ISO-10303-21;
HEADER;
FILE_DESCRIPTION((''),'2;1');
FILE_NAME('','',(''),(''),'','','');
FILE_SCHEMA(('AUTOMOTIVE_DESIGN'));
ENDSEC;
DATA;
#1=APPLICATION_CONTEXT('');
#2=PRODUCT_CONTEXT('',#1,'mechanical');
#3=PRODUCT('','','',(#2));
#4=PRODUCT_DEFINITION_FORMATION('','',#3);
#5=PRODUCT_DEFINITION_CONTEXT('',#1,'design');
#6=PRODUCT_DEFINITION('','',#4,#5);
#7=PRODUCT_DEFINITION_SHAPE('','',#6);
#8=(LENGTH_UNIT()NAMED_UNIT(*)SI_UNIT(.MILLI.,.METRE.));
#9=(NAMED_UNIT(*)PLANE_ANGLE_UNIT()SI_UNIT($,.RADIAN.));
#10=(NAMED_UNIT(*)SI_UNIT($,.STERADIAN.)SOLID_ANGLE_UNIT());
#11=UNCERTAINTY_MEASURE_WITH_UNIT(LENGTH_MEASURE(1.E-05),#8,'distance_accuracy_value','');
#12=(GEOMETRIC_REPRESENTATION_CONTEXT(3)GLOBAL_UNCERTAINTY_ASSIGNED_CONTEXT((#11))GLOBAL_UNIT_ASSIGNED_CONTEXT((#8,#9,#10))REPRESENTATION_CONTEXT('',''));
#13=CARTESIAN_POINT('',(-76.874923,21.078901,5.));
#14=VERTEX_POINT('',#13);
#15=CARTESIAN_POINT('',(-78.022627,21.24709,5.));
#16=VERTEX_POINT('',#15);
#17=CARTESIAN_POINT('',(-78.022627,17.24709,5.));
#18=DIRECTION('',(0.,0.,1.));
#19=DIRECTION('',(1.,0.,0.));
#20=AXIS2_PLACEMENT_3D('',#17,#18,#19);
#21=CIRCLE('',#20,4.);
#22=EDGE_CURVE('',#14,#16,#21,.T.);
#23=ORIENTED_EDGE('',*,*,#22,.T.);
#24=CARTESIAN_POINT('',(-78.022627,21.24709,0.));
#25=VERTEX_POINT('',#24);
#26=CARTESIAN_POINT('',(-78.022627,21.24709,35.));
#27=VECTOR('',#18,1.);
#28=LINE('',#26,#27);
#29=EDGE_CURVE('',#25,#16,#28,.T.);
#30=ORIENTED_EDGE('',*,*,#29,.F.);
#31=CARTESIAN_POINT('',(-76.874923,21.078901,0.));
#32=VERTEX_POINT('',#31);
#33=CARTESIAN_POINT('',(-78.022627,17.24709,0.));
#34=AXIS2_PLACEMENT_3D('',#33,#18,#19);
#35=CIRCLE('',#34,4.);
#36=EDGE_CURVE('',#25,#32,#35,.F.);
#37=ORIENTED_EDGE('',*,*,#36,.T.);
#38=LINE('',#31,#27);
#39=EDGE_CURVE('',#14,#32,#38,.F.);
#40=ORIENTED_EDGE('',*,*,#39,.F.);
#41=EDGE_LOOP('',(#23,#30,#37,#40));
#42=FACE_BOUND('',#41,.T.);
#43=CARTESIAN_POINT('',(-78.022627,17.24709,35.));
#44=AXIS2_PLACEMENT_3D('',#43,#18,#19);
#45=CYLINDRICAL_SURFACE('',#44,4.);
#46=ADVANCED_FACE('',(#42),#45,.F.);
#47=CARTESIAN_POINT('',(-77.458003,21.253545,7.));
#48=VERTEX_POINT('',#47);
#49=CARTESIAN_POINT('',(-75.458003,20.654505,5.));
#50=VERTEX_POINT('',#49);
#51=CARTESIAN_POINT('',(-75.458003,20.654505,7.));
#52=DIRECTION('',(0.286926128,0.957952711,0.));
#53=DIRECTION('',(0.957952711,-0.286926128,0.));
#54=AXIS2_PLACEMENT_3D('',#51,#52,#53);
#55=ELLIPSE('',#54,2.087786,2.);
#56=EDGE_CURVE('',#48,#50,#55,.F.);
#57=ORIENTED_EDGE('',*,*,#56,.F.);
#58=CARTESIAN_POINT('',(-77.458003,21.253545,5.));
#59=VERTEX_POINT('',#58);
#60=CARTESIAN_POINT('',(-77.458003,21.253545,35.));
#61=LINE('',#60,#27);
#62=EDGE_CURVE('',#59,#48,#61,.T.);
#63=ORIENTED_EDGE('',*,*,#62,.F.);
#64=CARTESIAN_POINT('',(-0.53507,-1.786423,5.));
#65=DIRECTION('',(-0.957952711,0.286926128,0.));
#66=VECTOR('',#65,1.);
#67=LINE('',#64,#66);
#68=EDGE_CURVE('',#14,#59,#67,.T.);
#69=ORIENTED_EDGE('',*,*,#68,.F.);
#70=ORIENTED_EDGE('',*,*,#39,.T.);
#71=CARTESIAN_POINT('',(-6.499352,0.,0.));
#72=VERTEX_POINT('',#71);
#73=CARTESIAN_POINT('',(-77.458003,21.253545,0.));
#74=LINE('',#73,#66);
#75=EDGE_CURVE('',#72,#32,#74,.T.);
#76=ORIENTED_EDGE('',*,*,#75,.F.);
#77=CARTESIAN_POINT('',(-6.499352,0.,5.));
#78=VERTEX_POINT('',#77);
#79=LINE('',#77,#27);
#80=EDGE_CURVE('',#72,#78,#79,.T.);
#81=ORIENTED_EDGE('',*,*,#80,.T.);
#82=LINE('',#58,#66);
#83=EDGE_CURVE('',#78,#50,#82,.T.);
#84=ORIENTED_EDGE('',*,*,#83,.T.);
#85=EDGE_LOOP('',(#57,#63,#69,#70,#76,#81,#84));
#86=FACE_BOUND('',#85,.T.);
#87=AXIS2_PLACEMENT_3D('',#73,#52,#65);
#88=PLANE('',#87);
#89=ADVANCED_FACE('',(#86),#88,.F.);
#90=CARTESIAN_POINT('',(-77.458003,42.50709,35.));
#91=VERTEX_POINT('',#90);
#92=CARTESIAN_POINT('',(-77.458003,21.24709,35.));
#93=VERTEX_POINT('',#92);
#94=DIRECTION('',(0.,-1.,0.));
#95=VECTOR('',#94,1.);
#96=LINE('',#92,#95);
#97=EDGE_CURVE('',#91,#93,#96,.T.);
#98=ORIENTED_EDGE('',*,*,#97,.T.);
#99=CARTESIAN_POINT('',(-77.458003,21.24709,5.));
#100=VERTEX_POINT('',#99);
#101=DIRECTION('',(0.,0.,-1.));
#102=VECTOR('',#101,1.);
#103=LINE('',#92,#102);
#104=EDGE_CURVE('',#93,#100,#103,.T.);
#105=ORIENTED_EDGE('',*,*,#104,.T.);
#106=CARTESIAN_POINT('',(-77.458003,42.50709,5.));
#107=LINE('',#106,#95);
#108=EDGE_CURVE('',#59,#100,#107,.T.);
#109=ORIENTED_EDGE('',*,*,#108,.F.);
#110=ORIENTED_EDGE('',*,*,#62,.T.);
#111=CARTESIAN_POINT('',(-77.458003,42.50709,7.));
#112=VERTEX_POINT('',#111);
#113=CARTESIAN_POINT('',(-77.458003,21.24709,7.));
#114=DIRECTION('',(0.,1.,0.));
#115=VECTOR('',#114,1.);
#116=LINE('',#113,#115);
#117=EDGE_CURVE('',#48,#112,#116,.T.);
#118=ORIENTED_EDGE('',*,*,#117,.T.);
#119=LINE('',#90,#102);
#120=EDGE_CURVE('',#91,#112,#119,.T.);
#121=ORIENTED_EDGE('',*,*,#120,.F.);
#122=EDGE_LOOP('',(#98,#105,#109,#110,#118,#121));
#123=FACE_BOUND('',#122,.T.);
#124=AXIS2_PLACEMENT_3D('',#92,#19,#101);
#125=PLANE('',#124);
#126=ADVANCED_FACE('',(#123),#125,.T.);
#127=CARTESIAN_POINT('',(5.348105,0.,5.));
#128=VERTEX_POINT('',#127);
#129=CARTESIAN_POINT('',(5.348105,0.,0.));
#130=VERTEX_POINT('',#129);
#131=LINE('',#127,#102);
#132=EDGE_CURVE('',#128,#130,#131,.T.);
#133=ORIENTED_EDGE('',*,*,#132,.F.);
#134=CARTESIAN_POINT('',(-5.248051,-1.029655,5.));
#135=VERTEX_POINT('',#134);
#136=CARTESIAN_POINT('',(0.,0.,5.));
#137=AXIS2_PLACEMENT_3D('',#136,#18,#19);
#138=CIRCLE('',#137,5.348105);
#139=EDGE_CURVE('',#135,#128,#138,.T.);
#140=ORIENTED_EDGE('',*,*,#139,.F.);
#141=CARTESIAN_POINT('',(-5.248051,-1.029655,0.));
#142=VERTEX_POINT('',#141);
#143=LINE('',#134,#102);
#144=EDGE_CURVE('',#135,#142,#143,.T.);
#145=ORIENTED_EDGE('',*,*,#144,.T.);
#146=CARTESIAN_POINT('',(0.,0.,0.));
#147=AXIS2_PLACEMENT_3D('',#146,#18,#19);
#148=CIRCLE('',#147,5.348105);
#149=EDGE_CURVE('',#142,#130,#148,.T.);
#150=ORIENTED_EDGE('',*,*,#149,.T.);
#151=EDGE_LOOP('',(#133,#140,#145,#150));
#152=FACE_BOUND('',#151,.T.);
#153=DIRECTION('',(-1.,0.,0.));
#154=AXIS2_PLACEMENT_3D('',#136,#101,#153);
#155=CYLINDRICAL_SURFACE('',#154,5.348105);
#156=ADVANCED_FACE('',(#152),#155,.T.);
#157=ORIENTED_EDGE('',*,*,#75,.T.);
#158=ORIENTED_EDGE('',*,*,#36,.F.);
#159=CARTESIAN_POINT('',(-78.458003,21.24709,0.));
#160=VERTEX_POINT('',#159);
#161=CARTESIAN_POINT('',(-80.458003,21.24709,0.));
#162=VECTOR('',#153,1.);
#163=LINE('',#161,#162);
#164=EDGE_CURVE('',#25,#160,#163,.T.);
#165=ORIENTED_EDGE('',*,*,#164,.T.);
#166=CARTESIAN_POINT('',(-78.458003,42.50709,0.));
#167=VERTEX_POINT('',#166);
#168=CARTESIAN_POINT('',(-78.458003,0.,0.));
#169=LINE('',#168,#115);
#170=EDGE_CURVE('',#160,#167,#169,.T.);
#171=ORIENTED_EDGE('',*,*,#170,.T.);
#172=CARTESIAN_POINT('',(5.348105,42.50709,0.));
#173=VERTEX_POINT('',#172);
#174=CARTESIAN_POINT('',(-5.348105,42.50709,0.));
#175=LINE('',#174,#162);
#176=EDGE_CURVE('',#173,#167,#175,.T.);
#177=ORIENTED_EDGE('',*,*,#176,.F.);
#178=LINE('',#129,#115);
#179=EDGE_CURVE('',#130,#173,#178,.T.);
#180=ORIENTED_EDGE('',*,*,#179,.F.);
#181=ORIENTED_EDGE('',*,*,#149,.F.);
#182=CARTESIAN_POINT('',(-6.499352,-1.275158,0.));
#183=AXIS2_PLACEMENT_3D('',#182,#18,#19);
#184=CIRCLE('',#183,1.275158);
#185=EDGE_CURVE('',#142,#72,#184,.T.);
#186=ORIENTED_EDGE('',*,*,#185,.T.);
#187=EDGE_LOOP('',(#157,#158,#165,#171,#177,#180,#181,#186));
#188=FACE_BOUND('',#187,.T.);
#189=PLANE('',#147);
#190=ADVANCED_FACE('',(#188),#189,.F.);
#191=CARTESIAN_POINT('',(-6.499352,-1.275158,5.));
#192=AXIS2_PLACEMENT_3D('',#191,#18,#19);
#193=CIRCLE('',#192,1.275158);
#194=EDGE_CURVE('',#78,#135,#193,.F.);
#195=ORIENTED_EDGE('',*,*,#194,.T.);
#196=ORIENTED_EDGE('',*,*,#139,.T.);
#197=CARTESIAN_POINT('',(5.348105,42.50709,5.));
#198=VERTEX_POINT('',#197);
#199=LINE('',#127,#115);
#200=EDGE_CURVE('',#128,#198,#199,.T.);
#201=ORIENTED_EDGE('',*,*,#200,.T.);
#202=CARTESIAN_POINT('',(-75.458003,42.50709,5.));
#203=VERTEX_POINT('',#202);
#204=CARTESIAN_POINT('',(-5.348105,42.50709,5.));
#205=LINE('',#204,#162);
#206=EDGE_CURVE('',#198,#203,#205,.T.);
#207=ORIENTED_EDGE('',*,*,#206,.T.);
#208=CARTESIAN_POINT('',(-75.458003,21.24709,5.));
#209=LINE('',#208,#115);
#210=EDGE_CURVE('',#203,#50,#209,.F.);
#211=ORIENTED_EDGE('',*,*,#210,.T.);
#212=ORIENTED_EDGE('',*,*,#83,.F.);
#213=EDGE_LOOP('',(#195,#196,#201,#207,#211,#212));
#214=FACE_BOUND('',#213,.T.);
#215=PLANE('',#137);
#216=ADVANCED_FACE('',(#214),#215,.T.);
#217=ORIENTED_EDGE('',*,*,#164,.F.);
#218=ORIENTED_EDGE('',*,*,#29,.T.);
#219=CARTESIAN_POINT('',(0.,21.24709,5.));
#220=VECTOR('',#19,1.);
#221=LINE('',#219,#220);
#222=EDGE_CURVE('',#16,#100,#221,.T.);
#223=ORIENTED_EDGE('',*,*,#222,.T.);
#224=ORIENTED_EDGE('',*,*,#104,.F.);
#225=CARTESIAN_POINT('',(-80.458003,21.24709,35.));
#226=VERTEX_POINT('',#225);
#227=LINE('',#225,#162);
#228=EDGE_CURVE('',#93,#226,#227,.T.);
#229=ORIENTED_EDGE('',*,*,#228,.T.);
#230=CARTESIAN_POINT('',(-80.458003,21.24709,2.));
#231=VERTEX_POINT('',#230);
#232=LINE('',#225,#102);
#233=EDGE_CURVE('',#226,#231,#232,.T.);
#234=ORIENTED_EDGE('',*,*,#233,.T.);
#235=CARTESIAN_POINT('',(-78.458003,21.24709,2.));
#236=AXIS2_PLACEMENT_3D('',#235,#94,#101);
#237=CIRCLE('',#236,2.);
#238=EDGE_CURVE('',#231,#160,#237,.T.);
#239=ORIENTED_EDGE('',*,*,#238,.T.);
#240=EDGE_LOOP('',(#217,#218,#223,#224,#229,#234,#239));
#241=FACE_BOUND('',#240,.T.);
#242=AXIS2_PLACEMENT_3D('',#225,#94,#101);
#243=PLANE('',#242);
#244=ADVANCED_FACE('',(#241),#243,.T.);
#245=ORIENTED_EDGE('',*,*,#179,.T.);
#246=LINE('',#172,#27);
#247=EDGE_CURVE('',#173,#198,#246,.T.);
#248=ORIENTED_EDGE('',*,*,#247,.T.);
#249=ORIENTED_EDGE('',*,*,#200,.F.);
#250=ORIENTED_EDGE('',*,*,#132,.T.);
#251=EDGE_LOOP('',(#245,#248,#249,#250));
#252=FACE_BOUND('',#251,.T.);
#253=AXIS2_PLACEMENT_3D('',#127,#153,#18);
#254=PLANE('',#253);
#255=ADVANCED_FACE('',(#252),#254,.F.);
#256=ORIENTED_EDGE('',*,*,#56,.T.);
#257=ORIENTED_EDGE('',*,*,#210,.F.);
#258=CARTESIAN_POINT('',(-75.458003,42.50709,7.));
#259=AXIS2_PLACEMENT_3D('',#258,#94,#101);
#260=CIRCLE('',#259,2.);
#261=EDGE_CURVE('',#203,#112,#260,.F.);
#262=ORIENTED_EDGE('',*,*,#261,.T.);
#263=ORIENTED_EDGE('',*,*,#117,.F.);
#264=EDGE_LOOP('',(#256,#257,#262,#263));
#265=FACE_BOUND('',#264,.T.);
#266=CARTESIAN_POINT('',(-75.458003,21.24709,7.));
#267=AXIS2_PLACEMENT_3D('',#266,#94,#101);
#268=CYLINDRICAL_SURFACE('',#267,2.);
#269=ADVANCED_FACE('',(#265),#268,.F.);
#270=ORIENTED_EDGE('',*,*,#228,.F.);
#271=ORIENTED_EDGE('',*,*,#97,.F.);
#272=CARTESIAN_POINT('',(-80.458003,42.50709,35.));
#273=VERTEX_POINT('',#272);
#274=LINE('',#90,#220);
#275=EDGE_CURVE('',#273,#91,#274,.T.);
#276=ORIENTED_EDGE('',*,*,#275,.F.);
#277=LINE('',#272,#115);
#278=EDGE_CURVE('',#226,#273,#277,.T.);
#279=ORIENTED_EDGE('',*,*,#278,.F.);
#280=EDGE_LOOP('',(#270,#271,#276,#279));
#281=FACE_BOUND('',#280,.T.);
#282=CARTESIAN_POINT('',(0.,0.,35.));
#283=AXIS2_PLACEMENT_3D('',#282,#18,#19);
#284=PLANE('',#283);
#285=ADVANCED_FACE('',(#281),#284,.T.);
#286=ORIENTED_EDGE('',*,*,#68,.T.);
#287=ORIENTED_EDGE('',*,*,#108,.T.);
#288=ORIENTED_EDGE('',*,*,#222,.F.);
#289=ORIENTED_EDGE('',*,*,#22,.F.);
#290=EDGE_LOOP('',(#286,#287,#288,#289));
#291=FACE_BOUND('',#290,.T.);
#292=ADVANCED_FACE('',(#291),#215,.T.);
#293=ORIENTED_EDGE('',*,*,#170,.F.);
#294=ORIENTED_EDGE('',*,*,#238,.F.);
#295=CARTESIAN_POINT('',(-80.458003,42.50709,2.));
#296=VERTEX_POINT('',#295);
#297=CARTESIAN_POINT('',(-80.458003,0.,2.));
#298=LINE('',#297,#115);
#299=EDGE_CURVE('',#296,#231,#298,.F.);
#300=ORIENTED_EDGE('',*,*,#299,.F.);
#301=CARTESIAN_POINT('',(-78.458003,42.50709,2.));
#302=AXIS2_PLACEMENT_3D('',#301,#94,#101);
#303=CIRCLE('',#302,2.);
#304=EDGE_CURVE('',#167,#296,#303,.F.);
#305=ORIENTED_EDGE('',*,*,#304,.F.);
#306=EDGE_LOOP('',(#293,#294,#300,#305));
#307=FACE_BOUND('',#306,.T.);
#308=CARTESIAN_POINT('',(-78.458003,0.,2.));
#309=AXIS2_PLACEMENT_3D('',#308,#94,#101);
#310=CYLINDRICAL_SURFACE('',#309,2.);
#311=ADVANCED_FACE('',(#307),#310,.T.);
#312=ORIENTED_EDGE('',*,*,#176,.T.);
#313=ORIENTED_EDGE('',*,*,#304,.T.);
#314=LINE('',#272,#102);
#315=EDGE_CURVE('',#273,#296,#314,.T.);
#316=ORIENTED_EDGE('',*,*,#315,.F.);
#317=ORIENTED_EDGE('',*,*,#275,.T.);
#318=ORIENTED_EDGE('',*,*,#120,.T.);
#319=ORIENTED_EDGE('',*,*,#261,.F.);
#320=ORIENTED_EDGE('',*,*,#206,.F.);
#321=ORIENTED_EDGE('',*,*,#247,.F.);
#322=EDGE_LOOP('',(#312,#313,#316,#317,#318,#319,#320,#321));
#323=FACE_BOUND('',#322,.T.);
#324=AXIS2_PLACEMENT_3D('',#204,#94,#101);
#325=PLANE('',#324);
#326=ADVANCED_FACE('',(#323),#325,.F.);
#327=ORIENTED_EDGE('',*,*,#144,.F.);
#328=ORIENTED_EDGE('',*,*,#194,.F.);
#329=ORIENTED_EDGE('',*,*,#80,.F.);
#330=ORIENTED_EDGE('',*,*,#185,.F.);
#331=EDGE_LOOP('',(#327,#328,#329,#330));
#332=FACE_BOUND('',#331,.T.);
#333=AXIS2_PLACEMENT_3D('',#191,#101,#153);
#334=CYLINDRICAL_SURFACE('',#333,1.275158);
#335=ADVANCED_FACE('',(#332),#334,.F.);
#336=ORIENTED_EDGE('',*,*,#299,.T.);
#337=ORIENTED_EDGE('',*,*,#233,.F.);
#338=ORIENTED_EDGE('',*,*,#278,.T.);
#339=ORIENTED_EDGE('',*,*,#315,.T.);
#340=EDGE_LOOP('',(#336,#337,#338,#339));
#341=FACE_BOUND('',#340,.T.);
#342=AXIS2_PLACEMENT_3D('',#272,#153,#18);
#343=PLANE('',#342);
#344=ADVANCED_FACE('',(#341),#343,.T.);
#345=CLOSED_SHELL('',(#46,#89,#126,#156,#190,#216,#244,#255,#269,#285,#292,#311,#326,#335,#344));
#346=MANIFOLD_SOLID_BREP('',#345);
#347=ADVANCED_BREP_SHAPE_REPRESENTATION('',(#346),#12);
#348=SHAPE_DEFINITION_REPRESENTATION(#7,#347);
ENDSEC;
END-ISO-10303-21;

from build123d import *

# Parameters (mm, degrees)
ESTRUSIONE_ESTRUSIONE1_DEPTH = 5
SCHIZZO2_W                   = 72.109898292
SCHIZZO2_H                   = 42.507089678
ESTRUSIONE_ESTRUSIONE2_DEPTH = 5
SCHIZZO3_W                   = 10.696209694
SCHIZZO3_H                   = 5.348104847
ESTRUSIONE_ESTRUSIONE3_DEPTH = 5
RACCORDO1_R                  = 1.275157777
TAGLIO_ESTRUSIONE1_DEPTH     = 5
SCHIZZO6_W                   = 21.26
SCHIZZO6_H                   = 3
ESTRUSIONE_ESTRUSIONE4_DEPTH = 35
RACCORDO9_DEPTH              = 5
RACCORDO14_R                 = 2
RACCORDO15_R                 = 2


with BuildPart() as part:
    # Schizzo1 → Estrusione-Estrusione1 (new body)
    with BuildSketch(Plane.XY):
        with BuildLine():
            Line((-5.348104847, 0), (-5.348104847, 37.158984831))
            ThreePointArc((-5.348104847, 37.158984831), (0, 42.507089678), (5.348104847, 37.158984831))
            Line((5.348104847, 37.158984831), (5.348104847, 0))
            ThreePointArc((5.348104847, 0), (0, -5.348104847), (-5.348104847, 0))
        make_face()
    extrude(amount=ESTRUSIONE_ESTRUSIONE1_DEPTH)

    # Schizzo2 → Estrusione-Estrusione2 (add)
    with BuildSketch(Plane.XY):
        with Locations((-41.403053993, 21.253544839)):
            Rectangle(SCHIZZO2_W, SCHIZZO2_H)
    extrude(amount=ESTRUSIONE_ESTRUSIONE2_DEPTH)

    # Schizzo3 → Estrusione-Estrusione3 (add)
    with BuildSketch(Plane.XY.offset(5)):
        with Locations((0, 39.833037254)):
            Rectangle(SCHIZZO3_W, SCHIZZO3_H)
    extrude(amount=-ESTRUSIONE_ESTRUSIONE3_DEPTH)

    # Raccordo1
    raccordo1_edges = [part.edges().sort_by_distance(p)[0] for p in [
        (-5.348104847, 0, 2.5),
    ]]
    fillet(raccordo1_edges, radius=RACCORDO1_R)

    # Schizzo5 → Taglio-Estrusione1 (cut)
    with BuildSketch(Plane.XY.offset(5)):
        Polygon((-77.458003139, 21.253544839), (-6.499352309, 0), (-77.458003139, 0), align=None)
    extrude(amount=-TAGLIO_ESTRUSIONE1_DEPTH, mode=Mode.SUBTRACT)

    # Schizzo6 → Estrusione-Estrusione4 (add)
    with BuildSketch(Plane(origin=(0, 0, 0), x_dir=(0, -1, 0), z_dir=(0, 0, -1))):
        with Locations((-31.877089678, 78.958003139)):
            Rectangle(SCHIZZO6_W, SCHIZZO6_H)
    extrude(amount=-ESTRUSIONE_ESTRUSIONE4_DEPTH)

    # Raccordo9: read off the stored shape, not the designer's step
    # Raccordo9 outline → Raccordo9 (add)
    with BuildSketch(Plane.XY):
        with BuildLine():
            ThreePointArc((-78.02262727, 21.247089678), (-77.442645969, 21.204819039), (-76.874922759, 21.078900524))
            Line((-76.874922759, 21.078900524), (-77.458003139, 21.253544839))
            Line((-77.458003139, 21.253544839), (-77.458003139, 21.247089678))
            Line((-77.458003139, 21.247089678), (-78.02262727, 21.247089678))
        make_face()
    extrude(amount=RACCORDO9_DEPTH)

    # Raccordo14
    raccordo14_edges = [part.edges().sort_by_distance(p)[0] for p in [
        (-80.458003139, 31.877089678, 0),
    ]]
    fillet(raccordo14_edges, radius=RACCORDO14_R)

    # Raccordo15
    # the kernel refuses this fillet: 2 mm, written as the material it adds along each edge
    with BuildSketch(Plane(origin=(-77.458003139, 42.507089678, 5), x_dir=(1, 0, 0), z_dir=(0, -1, 0))) as raccordo15_piece_1:
        with BuildLine():
            CenterArc((RACCORDO15_R, RACCORDO15_R), RACCORDO15_R, 180, 90)
            Line((0, RACCORDO15_R), (0, 0))
            Line((0, 0), (RACCORDO15_R, 0))
        make_face()
    extrude(amount=21.253544839)
    with BuildSketch(Plane(origin=(-77.458003139, 21.253544839, 5), x_dir=(1, 0, 0), z_dir=(0, -1, 0))) as raccordo15_piece_2_section:
        with BuildLine():
            CenterArc((RACCORDO15_R, RACCORDO15_R), RACCORDO15_R, 180, 90)
            Line((RACCORDO15_R * 9.50990397541e-11, RACCORDO15_R), (0, 0))
            Line((0, 0), (RACCORDO15_R, 0))
        make_face()
    raccordo15_piece_2 = extrude(amount=5.006455161, mode=Mode.PRIVATE)
    raccordo15_piece_2 = split(raccordo15_piece_2, bisect_by=Plane(origin=(-77.458003139, 21.253544839, 5), z_dir=(0.2869261276439439, 0.957952711398246, 0)), keep=Keep.TOP, mode=Mode.PRIVATE)
    add(raccordo15_piece_2)


solid = part.part
